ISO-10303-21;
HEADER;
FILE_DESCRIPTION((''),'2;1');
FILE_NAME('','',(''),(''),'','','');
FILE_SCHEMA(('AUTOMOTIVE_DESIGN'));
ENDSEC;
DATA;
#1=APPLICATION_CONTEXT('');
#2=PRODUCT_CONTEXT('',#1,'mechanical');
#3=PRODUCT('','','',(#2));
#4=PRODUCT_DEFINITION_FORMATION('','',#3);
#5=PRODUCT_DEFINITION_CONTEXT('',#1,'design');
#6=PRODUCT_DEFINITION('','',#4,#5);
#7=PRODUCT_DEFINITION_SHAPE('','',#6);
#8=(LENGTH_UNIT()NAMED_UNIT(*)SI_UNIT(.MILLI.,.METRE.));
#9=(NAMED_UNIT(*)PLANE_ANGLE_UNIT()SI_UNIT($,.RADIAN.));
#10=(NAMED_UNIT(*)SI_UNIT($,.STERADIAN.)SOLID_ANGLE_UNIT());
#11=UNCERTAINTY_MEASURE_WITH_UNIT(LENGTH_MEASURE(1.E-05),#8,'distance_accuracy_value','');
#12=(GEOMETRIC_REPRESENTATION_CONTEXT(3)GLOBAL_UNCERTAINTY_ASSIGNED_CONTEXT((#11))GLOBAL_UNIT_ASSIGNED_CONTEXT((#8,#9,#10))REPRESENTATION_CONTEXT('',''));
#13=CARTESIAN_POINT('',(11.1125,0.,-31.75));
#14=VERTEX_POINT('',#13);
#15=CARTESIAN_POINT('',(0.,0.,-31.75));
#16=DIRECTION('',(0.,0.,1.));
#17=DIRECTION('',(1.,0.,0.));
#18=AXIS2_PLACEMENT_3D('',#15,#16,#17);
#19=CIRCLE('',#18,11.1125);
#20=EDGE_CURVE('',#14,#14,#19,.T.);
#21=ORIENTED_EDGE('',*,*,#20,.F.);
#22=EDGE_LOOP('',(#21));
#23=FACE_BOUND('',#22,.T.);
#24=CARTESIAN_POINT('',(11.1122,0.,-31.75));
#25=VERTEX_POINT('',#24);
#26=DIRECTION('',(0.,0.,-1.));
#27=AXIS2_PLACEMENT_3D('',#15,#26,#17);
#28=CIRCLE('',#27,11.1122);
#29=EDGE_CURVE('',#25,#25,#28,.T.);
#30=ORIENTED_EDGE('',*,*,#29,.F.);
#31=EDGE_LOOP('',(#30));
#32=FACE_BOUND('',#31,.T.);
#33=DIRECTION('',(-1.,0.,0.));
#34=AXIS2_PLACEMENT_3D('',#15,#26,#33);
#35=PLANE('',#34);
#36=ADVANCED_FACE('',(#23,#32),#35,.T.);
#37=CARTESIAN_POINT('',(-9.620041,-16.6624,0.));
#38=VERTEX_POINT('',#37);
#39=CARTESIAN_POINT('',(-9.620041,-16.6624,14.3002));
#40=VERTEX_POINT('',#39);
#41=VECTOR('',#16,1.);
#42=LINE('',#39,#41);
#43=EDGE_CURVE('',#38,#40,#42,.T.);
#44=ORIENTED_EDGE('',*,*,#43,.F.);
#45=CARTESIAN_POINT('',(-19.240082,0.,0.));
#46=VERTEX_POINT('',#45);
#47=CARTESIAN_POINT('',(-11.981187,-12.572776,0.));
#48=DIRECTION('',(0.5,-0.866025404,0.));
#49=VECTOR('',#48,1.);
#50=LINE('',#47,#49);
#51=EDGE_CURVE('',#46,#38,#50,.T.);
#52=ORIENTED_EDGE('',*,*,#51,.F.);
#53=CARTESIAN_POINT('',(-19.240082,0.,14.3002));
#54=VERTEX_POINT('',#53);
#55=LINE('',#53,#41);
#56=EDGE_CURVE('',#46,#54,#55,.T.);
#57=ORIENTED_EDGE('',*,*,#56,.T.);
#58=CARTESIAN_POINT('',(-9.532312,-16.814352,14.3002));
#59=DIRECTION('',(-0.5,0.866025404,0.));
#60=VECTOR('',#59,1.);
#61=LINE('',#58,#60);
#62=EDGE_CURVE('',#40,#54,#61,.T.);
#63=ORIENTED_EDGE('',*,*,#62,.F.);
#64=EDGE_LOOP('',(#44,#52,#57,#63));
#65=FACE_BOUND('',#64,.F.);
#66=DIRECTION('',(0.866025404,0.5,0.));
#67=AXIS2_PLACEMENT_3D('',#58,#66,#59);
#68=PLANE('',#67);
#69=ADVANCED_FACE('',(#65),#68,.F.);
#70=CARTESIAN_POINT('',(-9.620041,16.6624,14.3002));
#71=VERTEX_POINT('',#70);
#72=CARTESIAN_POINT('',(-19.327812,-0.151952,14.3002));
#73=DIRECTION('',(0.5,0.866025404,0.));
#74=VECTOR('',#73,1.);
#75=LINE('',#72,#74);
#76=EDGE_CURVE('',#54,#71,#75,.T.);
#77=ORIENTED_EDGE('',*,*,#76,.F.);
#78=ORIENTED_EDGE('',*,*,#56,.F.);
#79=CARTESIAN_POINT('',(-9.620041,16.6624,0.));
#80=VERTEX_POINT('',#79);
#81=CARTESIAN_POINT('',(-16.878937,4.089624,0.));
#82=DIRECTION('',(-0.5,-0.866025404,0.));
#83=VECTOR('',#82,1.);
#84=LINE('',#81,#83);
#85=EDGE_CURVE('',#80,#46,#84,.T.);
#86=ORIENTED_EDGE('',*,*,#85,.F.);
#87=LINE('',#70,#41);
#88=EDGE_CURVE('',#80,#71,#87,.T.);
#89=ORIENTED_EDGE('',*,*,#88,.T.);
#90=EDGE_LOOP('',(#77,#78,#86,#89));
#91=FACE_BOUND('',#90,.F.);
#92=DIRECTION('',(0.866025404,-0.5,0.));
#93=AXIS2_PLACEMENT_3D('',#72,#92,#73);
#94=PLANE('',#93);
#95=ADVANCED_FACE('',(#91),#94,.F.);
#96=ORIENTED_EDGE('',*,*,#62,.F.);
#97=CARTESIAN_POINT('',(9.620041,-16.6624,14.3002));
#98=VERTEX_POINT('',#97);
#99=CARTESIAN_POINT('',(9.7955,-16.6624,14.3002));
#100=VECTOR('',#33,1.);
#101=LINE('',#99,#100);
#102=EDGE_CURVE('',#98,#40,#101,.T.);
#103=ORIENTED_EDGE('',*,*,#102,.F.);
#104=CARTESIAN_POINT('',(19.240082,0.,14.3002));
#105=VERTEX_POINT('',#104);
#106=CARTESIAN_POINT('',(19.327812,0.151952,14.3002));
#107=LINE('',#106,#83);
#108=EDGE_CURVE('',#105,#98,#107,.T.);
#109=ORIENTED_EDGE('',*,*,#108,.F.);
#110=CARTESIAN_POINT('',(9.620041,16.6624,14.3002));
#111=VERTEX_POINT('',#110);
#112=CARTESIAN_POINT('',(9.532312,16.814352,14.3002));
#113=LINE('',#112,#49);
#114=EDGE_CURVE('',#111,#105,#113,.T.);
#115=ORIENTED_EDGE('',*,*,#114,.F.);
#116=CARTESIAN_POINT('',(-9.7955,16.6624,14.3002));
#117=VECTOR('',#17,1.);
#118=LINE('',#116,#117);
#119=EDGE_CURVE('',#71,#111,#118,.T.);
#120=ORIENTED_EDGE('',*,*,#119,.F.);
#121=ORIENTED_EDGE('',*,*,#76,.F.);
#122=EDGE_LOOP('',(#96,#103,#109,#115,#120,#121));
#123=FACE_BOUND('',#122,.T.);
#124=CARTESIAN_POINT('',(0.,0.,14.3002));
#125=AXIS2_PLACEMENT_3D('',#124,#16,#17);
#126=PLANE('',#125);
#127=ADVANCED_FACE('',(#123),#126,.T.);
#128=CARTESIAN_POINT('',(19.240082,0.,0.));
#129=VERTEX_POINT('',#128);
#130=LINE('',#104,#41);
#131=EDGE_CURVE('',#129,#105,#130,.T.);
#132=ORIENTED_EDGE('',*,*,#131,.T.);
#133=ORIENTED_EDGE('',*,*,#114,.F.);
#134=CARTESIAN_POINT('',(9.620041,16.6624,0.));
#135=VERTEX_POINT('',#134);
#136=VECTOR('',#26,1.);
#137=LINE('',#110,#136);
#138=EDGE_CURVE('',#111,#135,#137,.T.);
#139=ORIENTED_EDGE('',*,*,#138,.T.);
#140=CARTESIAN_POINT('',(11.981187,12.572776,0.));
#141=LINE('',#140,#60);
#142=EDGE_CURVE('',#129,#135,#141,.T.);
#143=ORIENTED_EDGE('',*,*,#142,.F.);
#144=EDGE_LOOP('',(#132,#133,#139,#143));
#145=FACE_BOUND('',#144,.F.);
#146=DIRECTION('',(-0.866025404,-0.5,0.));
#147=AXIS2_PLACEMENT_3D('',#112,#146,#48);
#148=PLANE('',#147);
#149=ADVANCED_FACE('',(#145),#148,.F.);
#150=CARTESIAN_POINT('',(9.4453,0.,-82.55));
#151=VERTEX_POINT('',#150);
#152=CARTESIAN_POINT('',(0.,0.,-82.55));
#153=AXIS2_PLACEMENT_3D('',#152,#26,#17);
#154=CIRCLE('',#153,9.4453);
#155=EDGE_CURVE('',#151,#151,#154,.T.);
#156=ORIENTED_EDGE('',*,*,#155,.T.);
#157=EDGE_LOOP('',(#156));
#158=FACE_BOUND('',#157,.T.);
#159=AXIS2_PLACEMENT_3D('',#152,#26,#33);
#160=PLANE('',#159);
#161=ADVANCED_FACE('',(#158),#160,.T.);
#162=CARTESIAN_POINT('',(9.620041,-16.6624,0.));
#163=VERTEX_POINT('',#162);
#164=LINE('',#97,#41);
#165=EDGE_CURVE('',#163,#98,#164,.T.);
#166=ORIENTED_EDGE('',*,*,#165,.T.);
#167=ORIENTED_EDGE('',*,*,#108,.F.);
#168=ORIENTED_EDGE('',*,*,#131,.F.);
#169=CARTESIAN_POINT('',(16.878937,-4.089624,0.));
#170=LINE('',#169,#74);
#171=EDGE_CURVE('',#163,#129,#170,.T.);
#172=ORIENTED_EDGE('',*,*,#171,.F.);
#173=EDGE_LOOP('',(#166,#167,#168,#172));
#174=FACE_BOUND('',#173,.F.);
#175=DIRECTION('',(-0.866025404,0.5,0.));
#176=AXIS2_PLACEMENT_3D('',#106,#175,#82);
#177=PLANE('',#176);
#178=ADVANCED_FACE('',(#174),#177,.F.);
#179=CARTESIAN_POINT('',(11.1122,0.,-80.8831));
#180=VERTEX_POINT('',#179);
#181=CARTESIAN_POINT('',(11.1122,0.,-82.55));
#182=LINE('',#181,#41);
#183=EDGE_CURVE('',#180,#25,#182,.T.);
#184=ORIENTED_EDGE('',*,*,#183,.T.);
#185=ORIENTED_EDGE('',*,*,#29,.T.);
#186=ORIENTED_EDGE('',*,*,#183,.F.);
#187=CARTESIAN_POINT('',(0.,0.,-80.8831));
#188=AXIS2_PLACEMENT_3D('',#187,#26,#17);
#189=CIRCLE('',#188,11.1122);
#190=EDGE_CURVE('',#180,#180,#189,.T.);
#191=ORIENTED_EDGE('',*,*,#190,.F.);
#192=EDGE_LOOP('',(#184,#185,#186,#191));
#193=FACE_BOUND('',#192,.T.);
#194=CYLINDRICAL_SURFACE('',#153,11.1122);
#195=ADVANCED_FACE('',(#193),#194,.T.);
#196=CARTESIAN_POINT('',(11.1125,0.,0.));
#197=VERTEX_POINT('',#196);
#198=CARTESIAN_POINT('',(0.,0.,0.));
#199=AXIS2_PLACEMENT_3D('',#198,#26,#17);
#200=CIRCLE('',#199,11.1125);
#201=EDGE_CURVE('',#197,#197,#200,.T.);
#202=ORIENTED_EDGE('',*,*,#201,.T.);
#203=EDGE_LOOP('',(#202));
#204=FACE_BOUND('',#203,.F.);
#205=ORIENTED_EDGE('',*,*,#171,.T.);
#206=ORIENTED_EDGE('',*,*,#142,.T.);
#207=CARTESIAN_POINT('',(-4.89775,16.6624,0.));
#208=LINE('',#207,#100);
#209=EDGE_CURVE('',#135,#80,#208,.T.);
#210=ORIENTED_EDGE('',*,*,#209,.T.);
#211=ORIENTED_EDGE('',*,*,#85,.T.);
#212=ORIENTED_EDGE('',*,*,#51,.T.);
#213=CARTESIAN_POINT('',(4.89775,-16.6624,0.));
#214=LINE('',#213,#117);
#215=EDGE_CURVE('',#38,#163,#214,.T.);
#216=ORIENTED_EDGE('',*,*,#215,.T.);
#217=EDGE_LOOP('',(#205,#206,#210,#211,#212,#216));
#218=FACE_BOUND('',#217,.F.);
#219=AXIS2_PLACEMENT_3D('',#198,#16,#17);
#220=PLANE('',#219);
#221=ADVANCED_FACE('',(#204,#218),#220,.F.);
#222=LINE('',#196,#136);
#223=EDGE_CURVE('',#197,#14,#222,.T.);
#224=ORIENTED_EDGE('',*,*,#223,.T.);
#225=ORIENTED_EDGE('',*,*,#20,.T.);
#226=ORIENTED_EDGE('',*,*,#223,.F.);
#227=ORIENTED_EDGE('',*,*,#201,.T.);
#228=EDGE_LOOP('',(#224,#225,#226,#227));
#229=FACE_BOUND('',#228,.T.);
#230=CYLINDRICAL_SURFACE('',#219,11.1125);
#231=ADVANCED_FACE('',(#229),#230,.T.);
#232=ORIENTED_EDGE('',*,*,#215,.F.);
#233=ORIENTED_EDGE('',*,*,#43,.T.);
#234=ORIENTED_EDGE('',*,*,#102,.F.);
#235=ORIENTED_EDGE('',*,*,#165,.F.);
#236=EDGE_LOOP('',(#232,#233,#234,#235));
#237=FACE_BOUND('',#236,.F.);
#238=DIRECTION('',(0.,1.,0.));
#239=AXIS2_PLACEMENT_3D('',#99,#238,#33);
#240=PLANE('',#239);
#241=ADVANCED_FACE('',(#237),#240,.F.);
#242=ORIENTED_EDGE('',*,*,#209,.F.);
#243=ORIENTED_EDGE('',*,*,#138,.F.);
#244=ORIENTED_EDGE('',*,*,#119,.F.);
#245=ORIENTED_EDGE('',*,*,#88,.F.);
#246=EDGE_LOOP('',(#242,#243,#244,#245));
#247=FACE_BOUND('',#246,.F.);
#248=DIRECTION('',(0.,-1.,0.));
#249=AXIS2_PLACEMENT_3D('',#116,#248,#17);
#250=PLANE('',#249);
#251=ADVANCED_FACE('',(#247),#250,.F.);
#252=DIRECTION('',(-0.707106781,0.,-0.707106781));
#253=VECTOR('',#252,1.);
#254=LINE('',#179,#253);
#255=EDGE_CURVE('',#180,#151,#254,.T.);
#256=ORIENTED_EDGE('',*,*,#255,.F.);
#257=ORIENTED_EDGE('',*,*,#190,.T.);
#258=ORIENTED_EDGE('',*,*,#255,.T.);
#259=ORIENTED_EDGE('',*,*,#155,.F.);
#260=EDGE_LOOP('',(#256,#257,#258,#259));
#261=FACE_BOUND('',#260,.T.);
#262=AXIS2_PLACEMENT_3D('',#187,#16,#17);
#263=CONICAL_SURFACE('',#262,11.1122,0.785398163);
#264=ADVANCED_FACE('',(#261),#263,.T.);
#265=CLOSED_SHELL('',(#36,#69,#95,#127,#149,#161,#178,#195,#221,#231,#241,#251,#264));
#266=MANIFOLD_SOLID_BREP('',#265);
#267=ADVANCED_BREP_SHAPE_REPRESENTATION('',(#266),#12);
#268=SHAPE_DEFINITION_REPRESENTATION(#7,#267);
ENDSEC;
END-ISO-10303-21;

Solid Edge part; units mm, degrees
sketch "Sketch1" plane through (0, 0, 0) normal (0, 0, 1) x (1, 0, 0)
  circle A0 centre (0, 0) radius 19.3284
  dimension "D1" = 38.6568
extrude "Protrusion1" add sketch "Sketch1" along normal blind 14.3002
sketch "Sketch2" plane through (0, 0, 0) normal (0, 0, -1) x (1, 0, 0)
  circle A0 centre (0, 0) radius 11.1125
extrude "Protrusion2" add sketch "Sketch2" along normal blind 82.55
sketch "Sketch3" plane through (0, 0, -82.55) normal (0, 0, -1) x (1, 0, 0)
  circle A0 centre (0, 0) radius 11.1122
extrude "Cutout1" cut sketch "Sketch3" against normal blind 50.8 flip side to cut
chamfer "Chamfer_1" distance 1.6669 angle 45 1 edges at (-11.1122, 0, -82.55)
sketch "Sketch4" plane through (0, 0, 14.3002) normal (0, 0, 1) x (1, 0, 0)
  line L0 (-9.7955, 16.6624) -> (9.7955, 16.6624)
  dimension "D1" = 33.3248
extrude "Cutout2" cut sketch "Sketch4" against normal up to next material side at (0, 16.7124, 14.3002)
pattern_circular "Pattern1" count 6 over 360 about axis through (0, 0, 14.3002) along (0, 0, 1) of "Cutout2"
properties part number "203269"
